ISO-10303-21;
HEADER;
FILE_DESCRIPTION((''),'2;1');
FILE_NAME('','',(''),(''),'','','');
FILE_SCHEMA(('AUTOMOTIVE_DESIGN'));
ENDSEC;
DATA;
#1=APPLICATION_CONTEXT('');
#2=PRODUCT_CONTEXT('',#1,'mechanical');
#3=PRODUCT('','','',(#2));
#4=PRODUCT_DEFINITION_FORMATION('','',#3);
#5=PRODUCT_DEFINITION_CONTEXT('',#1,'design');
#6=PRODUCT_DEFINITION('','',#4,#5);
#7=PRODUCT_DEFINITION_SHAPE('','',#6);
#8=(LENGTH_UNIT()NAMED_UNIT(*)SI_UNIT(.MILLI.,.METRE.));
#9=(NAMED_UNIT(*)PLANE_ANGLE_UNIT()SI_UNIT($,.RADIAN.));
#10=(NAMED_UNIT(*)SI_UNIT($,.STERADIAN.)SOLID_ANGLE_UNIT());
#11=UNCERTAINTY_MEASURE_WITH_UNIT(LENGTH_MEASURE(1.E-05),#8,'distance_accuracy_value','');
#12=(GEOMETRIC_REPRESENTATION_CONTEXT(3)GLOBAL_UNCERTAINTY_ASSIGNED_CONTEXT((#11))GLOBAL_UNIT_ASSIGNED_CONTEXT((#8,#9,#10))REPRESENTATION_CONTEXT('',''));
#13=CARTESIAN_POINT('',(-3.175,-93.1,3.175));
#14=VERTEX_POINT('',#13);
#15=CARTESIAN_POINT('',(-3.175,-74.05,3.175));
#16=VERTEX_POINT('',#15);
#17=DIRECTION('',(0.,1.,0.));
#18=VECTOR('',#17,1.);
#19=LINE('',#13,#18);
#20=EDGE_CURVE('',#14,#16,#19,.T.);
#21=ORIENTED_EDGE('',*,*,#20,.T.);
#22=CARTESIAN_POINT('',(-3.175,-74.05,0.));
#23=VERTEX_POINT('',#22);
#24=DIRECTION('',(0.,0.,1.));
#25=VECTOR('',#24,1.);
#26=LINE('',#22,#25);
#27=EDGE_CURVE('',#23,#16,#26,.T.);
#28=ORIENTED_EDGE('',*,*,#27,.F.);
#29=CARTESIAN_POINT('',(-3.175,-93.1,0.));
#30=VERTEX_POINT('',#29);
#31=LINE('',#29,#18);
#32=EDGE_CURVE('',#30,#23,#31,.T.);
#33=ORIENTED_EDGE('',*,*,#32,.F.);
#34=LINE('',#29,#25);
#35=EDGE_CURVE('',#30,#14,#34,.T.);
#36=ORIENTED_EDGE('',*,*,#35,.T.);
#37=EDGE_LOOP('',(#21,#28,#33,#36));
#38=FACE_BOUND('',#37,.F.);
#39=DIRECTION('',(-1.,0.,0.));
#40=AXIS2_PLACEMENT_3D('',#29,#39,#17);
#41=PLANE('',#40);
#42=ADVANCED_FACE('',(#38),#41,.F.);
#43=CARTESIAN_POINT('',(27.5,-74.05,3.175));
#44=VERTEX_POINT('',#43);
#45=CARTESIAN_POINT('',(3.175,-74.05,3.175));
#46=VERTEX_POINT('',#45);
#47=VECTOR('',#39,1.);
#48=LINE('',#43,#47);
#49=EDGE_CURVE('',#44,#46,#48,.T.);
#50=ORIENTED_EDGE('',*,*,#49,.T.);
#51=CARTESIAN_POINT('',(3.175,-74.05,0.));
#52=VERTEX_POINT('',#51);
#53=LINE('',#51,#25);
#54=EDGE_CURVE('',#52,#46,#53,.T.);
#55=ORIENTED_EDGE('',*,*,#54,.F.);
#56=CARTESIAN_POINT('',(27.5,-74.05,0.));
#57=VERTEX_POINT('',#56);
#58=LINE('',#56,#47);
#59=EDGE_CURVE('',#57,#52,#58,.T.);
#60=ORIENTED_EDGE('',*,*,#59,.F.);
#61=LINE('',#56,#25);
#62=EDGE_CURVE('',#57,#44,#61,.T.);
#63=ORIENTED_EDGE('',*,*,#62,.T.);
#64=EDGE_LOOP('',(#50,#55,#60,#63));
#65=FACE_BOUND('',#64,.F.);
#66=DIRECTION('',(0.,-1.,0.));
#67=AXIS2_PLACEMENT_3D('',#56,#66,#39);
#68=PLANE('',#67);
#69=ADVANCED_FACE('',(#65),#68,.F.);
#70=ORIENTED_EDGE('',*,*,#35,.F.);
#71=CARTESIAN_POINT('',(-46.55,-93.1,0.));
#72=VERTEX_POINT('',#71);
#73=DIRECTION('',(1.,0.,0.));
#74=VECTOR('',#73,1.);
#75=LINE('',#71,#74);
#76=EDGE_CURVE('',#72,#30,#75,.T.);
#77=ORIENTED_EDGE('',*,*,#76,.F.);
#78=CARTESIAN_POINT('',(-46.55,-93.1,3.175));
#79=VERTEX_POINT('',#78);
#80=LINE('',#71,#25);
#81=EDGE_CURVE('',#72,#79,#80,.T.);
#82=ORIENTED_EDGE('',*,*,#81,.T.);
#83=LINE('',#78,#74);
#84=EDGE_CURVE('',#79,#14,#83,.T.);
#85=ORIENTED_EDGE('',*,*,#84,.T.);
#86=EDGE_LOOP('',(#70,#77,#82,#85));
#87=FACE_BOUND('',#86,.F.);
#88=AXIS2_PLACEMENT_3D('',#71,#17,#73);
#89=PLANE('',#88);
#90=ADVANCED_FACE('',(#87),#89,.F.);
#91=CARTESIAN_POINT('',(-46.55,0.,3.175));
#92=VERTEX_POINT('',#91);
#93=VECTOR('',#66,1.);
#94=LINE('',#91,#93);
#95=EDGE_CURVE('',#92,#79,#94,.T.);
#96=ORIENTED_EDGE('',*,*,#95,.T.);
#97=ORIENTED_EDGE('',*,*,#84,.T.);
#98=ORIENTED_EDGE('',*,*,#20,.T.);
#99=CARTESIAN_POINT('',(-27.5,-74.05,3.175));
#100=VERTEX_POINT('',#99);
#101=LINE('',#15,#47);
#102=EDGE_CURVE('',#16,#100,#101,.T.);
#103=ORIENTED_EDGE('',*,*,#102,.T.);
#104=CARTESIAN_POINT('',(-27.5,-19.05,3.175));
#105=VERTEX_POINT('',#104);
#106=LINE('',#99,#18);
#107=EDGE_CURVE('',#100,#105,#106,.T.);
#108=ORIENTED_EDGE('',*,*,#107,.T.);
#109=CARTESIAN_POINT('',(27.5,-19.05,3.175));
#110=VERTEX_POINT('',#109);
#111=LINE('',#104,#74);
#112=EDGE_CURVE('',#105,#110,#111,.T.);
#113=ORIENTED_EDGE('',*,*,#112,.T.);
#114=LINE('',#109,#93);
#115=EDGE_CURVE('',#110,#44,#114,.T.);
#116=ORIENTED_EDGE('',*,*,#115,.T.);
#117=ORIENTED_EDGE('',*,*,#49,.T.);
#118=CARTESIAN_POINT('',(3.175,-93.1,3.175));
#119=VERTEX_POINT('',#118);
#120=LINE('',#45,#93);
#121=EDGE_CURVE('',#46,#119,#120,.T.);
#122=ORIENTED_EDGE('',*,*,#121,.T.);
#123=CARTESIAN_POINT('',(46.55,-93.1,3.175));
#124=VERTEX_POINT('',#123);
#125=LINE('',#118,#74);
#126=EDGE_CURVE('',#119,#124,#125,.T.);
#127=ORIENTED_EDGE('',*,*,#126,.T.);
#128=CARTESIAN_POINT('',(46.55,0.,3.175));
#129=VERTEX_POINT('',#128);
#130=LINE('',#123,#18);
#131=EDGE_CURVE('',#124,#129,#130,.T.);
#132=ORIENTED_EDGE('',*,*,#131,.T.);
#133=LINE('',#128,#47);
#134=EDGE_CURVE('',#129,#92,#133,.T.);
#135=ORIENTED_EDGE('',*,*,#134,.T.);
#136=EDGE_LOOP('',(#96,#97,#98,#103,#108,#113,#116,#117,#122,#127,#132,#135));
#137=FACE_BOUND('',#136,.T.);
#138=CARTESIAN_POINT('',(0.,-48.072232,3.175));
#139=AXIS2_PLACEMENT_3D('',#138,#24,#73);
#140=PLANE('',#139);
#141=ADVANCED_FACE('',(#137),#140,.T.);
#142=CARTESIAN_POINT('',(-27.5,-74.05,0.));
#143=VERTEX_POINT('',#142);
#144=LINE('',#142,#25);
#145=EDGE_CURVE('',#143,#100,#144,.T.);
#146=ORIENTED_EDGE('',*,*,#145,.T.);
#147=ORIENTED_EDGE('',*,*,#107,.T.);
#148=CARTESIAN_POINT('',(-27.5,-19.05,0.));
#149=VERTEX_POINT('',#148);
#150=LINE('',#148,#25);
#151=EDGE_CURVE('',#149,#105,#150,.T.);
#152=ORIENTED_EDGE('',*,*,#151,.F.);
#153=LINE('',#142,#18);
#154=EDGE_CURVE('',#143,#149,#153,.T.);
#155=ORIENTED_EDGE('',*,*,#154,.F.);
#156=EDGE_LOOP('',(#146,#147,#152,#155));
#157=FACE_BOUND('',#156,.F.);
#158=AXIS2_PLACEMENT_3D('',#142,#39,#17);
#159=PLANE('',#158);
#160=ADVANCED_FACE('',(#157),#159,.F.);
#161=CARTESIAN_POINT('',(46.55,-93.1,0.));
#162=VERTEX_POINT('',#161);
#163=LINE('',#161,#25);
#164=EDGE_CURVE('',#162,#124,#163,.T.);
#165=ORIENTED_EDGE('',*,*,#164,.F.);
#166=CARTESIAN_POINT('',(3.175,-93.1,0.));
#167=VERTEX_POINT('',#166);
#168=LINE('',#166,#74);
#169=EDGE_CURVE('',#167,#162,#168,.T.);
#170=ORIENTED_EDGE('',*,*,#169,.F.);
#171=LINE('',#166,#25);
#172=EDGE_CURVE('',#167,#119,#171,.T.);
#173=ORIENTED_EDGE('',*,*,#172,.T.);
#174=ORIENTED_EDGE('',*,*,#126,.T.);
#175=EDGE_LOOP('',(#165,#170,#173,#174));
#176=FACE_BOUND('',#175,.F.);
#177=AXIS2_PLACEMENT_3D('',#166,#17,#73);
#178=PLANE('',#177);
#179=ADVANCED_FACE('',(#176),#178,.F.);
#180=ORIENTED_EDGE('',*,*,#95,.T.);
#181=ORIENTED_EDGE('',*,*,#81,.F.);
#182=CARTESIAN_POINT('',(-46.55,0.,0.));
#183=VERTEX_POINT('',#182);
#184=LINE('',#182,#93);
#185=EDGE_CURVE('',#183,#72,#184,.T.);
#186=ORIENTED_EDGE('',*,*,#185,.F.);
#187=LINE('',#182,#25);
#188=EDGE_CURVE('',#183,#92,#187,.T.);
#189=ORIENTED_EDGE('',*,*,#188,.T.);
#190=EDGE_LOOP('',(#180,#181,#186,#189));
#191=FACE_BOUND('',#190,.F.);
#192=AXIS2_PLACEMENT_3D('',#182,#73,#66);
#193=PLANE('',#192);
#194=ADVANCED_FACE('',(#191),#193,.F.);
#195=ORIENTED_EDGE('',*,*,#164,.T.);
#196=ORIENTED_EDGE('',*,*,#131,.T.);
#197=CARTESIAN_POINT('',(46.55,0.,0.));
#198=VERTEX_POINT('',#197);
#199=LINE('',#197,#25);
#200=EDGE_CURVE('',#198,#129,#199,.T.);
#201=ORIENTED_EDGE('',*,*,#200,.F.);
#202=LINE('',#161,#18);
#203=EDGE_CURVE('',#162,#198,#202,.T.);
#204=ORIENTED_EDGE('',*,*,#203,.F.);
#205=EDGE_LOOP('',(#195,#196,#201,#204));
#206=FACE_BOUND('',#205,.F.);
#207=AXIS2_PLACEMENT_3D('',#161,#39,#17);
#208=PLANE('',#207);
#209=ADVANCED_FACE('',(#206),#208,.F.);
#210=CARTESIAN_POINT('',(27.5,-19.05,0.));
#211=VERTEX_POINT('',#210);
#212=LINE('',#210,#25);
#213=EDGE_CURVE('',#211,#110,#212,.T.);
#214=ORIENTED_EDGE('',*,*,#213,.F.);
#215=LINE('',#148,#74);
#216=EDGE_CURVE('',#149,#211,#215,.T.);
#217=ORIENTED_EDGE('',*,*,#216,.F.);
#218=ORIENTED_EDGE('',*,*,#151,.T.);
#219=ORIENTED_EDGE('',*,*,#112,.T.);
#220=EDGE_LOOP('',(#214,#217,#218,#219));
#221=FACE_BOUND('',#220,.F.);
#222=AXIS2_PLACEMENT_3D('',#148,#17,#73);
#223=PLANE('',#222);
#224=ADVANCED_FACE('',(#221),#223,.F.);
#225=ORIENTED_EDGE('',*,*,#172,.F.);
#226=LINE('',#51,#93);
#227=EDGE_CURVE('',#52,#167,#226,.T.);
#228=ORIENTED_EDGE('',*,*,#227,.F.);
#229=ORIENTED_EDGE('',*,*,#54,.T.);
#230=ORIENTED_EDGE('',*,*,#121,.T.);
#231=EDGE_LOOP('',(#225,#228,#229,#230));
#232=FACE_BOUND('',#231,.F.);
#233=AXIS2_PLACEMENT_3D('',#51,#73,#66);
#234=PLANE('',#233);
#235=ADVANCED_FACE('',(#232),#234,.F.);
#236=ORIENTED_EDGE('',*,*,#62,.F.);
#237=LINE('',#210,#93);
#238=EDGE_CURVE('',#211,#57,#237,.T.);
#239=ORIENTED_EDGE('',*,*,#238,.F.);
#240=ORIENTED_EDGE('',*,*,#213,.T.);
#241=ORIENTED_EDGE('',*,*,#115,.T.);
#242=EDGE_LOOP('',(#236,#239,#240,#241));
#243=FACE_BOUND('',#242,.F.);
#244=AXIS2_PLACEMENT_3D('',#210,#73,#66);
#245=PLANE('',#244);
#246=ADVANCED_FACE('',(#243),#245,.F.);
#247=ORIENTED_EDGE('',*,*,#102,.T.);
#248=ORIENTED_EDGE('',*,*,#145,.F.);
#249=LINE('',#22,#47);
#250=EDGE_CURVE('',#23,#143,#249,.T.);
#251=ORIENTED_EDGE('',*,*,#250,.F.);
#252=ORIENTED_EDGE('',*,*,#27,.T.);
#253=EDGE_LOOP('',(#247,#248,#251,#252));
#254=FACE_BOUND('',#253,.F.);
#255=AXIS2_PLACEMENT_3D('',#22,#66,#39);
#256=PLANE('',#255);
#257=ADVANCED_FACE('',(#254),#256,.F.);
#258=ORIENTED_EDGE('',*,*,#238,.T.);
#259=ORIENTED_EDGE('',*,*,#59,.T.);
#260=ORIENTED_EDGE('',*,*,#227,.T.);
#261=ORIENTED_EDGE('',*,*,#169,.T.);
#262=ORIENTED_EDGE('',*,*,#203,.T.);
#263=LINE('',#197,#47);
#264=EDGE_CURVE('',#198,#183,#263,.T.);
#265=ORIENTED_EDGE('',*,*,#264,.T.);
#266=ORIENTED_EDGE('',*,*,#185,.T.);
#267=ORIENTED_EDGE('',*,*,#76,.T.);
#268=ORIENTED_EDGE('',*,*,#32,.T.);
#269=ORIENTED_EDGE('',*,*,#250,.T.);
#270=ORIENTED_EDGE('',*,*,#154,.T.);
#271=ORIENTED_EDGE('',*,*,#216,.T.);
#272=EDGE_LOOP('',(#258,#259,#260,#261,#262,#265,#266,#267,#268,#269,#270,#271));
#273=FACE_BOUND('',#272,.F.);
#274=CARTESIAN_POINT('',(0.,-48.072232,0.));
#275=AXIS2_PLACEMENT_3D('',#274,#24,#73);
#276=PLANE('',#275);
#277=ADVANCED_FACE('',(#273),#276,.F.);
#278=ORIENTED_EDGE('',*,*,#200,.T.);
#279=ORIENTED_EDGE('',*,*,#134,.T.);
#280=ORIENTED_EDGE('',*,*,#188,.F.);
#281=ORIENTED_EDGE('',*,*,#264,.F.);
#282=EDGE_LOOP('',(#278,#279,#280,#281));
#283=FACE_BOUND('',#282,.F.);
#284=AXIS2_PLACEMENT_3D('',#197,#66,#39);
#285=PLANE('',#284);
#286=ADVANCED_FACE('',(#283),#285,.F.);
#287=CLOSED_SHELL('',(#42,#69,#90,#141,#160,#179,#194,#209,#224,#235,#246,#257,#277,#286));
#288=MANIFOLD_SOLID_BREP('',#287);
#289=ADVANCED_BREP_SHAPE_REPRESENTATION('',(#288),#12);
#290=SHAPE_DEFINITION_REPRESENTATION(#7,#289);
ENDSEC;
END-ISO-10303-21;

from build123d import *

# Parameters (mm, degrees)
F1_DEPTH = 3.175


# Not quite as in the source:
# - a length typed as a fraction of an inch, garbled in the dataset ("3 / 203.2 mm" for 3/8 in), is restored


with BuildPart() as f1:
    # F0 (on Top) → F1 (new body)
    with BuildSketch(Plane.XY):
        Polygon((46.55, 0), (-46.55, 0), (-46.55, -93.1), (-3.175, -93.1), (-3.175, -74.05), (-27.5, -74.05), (-27.5, -19.05), (27.5, -19.05), (27.5, -74.05), (3.175, -74.05), (3.175, -93.1), (46.55, -93.1), align=None)
    extrude(amount=F1_DEPTH)


solid = f1.part
